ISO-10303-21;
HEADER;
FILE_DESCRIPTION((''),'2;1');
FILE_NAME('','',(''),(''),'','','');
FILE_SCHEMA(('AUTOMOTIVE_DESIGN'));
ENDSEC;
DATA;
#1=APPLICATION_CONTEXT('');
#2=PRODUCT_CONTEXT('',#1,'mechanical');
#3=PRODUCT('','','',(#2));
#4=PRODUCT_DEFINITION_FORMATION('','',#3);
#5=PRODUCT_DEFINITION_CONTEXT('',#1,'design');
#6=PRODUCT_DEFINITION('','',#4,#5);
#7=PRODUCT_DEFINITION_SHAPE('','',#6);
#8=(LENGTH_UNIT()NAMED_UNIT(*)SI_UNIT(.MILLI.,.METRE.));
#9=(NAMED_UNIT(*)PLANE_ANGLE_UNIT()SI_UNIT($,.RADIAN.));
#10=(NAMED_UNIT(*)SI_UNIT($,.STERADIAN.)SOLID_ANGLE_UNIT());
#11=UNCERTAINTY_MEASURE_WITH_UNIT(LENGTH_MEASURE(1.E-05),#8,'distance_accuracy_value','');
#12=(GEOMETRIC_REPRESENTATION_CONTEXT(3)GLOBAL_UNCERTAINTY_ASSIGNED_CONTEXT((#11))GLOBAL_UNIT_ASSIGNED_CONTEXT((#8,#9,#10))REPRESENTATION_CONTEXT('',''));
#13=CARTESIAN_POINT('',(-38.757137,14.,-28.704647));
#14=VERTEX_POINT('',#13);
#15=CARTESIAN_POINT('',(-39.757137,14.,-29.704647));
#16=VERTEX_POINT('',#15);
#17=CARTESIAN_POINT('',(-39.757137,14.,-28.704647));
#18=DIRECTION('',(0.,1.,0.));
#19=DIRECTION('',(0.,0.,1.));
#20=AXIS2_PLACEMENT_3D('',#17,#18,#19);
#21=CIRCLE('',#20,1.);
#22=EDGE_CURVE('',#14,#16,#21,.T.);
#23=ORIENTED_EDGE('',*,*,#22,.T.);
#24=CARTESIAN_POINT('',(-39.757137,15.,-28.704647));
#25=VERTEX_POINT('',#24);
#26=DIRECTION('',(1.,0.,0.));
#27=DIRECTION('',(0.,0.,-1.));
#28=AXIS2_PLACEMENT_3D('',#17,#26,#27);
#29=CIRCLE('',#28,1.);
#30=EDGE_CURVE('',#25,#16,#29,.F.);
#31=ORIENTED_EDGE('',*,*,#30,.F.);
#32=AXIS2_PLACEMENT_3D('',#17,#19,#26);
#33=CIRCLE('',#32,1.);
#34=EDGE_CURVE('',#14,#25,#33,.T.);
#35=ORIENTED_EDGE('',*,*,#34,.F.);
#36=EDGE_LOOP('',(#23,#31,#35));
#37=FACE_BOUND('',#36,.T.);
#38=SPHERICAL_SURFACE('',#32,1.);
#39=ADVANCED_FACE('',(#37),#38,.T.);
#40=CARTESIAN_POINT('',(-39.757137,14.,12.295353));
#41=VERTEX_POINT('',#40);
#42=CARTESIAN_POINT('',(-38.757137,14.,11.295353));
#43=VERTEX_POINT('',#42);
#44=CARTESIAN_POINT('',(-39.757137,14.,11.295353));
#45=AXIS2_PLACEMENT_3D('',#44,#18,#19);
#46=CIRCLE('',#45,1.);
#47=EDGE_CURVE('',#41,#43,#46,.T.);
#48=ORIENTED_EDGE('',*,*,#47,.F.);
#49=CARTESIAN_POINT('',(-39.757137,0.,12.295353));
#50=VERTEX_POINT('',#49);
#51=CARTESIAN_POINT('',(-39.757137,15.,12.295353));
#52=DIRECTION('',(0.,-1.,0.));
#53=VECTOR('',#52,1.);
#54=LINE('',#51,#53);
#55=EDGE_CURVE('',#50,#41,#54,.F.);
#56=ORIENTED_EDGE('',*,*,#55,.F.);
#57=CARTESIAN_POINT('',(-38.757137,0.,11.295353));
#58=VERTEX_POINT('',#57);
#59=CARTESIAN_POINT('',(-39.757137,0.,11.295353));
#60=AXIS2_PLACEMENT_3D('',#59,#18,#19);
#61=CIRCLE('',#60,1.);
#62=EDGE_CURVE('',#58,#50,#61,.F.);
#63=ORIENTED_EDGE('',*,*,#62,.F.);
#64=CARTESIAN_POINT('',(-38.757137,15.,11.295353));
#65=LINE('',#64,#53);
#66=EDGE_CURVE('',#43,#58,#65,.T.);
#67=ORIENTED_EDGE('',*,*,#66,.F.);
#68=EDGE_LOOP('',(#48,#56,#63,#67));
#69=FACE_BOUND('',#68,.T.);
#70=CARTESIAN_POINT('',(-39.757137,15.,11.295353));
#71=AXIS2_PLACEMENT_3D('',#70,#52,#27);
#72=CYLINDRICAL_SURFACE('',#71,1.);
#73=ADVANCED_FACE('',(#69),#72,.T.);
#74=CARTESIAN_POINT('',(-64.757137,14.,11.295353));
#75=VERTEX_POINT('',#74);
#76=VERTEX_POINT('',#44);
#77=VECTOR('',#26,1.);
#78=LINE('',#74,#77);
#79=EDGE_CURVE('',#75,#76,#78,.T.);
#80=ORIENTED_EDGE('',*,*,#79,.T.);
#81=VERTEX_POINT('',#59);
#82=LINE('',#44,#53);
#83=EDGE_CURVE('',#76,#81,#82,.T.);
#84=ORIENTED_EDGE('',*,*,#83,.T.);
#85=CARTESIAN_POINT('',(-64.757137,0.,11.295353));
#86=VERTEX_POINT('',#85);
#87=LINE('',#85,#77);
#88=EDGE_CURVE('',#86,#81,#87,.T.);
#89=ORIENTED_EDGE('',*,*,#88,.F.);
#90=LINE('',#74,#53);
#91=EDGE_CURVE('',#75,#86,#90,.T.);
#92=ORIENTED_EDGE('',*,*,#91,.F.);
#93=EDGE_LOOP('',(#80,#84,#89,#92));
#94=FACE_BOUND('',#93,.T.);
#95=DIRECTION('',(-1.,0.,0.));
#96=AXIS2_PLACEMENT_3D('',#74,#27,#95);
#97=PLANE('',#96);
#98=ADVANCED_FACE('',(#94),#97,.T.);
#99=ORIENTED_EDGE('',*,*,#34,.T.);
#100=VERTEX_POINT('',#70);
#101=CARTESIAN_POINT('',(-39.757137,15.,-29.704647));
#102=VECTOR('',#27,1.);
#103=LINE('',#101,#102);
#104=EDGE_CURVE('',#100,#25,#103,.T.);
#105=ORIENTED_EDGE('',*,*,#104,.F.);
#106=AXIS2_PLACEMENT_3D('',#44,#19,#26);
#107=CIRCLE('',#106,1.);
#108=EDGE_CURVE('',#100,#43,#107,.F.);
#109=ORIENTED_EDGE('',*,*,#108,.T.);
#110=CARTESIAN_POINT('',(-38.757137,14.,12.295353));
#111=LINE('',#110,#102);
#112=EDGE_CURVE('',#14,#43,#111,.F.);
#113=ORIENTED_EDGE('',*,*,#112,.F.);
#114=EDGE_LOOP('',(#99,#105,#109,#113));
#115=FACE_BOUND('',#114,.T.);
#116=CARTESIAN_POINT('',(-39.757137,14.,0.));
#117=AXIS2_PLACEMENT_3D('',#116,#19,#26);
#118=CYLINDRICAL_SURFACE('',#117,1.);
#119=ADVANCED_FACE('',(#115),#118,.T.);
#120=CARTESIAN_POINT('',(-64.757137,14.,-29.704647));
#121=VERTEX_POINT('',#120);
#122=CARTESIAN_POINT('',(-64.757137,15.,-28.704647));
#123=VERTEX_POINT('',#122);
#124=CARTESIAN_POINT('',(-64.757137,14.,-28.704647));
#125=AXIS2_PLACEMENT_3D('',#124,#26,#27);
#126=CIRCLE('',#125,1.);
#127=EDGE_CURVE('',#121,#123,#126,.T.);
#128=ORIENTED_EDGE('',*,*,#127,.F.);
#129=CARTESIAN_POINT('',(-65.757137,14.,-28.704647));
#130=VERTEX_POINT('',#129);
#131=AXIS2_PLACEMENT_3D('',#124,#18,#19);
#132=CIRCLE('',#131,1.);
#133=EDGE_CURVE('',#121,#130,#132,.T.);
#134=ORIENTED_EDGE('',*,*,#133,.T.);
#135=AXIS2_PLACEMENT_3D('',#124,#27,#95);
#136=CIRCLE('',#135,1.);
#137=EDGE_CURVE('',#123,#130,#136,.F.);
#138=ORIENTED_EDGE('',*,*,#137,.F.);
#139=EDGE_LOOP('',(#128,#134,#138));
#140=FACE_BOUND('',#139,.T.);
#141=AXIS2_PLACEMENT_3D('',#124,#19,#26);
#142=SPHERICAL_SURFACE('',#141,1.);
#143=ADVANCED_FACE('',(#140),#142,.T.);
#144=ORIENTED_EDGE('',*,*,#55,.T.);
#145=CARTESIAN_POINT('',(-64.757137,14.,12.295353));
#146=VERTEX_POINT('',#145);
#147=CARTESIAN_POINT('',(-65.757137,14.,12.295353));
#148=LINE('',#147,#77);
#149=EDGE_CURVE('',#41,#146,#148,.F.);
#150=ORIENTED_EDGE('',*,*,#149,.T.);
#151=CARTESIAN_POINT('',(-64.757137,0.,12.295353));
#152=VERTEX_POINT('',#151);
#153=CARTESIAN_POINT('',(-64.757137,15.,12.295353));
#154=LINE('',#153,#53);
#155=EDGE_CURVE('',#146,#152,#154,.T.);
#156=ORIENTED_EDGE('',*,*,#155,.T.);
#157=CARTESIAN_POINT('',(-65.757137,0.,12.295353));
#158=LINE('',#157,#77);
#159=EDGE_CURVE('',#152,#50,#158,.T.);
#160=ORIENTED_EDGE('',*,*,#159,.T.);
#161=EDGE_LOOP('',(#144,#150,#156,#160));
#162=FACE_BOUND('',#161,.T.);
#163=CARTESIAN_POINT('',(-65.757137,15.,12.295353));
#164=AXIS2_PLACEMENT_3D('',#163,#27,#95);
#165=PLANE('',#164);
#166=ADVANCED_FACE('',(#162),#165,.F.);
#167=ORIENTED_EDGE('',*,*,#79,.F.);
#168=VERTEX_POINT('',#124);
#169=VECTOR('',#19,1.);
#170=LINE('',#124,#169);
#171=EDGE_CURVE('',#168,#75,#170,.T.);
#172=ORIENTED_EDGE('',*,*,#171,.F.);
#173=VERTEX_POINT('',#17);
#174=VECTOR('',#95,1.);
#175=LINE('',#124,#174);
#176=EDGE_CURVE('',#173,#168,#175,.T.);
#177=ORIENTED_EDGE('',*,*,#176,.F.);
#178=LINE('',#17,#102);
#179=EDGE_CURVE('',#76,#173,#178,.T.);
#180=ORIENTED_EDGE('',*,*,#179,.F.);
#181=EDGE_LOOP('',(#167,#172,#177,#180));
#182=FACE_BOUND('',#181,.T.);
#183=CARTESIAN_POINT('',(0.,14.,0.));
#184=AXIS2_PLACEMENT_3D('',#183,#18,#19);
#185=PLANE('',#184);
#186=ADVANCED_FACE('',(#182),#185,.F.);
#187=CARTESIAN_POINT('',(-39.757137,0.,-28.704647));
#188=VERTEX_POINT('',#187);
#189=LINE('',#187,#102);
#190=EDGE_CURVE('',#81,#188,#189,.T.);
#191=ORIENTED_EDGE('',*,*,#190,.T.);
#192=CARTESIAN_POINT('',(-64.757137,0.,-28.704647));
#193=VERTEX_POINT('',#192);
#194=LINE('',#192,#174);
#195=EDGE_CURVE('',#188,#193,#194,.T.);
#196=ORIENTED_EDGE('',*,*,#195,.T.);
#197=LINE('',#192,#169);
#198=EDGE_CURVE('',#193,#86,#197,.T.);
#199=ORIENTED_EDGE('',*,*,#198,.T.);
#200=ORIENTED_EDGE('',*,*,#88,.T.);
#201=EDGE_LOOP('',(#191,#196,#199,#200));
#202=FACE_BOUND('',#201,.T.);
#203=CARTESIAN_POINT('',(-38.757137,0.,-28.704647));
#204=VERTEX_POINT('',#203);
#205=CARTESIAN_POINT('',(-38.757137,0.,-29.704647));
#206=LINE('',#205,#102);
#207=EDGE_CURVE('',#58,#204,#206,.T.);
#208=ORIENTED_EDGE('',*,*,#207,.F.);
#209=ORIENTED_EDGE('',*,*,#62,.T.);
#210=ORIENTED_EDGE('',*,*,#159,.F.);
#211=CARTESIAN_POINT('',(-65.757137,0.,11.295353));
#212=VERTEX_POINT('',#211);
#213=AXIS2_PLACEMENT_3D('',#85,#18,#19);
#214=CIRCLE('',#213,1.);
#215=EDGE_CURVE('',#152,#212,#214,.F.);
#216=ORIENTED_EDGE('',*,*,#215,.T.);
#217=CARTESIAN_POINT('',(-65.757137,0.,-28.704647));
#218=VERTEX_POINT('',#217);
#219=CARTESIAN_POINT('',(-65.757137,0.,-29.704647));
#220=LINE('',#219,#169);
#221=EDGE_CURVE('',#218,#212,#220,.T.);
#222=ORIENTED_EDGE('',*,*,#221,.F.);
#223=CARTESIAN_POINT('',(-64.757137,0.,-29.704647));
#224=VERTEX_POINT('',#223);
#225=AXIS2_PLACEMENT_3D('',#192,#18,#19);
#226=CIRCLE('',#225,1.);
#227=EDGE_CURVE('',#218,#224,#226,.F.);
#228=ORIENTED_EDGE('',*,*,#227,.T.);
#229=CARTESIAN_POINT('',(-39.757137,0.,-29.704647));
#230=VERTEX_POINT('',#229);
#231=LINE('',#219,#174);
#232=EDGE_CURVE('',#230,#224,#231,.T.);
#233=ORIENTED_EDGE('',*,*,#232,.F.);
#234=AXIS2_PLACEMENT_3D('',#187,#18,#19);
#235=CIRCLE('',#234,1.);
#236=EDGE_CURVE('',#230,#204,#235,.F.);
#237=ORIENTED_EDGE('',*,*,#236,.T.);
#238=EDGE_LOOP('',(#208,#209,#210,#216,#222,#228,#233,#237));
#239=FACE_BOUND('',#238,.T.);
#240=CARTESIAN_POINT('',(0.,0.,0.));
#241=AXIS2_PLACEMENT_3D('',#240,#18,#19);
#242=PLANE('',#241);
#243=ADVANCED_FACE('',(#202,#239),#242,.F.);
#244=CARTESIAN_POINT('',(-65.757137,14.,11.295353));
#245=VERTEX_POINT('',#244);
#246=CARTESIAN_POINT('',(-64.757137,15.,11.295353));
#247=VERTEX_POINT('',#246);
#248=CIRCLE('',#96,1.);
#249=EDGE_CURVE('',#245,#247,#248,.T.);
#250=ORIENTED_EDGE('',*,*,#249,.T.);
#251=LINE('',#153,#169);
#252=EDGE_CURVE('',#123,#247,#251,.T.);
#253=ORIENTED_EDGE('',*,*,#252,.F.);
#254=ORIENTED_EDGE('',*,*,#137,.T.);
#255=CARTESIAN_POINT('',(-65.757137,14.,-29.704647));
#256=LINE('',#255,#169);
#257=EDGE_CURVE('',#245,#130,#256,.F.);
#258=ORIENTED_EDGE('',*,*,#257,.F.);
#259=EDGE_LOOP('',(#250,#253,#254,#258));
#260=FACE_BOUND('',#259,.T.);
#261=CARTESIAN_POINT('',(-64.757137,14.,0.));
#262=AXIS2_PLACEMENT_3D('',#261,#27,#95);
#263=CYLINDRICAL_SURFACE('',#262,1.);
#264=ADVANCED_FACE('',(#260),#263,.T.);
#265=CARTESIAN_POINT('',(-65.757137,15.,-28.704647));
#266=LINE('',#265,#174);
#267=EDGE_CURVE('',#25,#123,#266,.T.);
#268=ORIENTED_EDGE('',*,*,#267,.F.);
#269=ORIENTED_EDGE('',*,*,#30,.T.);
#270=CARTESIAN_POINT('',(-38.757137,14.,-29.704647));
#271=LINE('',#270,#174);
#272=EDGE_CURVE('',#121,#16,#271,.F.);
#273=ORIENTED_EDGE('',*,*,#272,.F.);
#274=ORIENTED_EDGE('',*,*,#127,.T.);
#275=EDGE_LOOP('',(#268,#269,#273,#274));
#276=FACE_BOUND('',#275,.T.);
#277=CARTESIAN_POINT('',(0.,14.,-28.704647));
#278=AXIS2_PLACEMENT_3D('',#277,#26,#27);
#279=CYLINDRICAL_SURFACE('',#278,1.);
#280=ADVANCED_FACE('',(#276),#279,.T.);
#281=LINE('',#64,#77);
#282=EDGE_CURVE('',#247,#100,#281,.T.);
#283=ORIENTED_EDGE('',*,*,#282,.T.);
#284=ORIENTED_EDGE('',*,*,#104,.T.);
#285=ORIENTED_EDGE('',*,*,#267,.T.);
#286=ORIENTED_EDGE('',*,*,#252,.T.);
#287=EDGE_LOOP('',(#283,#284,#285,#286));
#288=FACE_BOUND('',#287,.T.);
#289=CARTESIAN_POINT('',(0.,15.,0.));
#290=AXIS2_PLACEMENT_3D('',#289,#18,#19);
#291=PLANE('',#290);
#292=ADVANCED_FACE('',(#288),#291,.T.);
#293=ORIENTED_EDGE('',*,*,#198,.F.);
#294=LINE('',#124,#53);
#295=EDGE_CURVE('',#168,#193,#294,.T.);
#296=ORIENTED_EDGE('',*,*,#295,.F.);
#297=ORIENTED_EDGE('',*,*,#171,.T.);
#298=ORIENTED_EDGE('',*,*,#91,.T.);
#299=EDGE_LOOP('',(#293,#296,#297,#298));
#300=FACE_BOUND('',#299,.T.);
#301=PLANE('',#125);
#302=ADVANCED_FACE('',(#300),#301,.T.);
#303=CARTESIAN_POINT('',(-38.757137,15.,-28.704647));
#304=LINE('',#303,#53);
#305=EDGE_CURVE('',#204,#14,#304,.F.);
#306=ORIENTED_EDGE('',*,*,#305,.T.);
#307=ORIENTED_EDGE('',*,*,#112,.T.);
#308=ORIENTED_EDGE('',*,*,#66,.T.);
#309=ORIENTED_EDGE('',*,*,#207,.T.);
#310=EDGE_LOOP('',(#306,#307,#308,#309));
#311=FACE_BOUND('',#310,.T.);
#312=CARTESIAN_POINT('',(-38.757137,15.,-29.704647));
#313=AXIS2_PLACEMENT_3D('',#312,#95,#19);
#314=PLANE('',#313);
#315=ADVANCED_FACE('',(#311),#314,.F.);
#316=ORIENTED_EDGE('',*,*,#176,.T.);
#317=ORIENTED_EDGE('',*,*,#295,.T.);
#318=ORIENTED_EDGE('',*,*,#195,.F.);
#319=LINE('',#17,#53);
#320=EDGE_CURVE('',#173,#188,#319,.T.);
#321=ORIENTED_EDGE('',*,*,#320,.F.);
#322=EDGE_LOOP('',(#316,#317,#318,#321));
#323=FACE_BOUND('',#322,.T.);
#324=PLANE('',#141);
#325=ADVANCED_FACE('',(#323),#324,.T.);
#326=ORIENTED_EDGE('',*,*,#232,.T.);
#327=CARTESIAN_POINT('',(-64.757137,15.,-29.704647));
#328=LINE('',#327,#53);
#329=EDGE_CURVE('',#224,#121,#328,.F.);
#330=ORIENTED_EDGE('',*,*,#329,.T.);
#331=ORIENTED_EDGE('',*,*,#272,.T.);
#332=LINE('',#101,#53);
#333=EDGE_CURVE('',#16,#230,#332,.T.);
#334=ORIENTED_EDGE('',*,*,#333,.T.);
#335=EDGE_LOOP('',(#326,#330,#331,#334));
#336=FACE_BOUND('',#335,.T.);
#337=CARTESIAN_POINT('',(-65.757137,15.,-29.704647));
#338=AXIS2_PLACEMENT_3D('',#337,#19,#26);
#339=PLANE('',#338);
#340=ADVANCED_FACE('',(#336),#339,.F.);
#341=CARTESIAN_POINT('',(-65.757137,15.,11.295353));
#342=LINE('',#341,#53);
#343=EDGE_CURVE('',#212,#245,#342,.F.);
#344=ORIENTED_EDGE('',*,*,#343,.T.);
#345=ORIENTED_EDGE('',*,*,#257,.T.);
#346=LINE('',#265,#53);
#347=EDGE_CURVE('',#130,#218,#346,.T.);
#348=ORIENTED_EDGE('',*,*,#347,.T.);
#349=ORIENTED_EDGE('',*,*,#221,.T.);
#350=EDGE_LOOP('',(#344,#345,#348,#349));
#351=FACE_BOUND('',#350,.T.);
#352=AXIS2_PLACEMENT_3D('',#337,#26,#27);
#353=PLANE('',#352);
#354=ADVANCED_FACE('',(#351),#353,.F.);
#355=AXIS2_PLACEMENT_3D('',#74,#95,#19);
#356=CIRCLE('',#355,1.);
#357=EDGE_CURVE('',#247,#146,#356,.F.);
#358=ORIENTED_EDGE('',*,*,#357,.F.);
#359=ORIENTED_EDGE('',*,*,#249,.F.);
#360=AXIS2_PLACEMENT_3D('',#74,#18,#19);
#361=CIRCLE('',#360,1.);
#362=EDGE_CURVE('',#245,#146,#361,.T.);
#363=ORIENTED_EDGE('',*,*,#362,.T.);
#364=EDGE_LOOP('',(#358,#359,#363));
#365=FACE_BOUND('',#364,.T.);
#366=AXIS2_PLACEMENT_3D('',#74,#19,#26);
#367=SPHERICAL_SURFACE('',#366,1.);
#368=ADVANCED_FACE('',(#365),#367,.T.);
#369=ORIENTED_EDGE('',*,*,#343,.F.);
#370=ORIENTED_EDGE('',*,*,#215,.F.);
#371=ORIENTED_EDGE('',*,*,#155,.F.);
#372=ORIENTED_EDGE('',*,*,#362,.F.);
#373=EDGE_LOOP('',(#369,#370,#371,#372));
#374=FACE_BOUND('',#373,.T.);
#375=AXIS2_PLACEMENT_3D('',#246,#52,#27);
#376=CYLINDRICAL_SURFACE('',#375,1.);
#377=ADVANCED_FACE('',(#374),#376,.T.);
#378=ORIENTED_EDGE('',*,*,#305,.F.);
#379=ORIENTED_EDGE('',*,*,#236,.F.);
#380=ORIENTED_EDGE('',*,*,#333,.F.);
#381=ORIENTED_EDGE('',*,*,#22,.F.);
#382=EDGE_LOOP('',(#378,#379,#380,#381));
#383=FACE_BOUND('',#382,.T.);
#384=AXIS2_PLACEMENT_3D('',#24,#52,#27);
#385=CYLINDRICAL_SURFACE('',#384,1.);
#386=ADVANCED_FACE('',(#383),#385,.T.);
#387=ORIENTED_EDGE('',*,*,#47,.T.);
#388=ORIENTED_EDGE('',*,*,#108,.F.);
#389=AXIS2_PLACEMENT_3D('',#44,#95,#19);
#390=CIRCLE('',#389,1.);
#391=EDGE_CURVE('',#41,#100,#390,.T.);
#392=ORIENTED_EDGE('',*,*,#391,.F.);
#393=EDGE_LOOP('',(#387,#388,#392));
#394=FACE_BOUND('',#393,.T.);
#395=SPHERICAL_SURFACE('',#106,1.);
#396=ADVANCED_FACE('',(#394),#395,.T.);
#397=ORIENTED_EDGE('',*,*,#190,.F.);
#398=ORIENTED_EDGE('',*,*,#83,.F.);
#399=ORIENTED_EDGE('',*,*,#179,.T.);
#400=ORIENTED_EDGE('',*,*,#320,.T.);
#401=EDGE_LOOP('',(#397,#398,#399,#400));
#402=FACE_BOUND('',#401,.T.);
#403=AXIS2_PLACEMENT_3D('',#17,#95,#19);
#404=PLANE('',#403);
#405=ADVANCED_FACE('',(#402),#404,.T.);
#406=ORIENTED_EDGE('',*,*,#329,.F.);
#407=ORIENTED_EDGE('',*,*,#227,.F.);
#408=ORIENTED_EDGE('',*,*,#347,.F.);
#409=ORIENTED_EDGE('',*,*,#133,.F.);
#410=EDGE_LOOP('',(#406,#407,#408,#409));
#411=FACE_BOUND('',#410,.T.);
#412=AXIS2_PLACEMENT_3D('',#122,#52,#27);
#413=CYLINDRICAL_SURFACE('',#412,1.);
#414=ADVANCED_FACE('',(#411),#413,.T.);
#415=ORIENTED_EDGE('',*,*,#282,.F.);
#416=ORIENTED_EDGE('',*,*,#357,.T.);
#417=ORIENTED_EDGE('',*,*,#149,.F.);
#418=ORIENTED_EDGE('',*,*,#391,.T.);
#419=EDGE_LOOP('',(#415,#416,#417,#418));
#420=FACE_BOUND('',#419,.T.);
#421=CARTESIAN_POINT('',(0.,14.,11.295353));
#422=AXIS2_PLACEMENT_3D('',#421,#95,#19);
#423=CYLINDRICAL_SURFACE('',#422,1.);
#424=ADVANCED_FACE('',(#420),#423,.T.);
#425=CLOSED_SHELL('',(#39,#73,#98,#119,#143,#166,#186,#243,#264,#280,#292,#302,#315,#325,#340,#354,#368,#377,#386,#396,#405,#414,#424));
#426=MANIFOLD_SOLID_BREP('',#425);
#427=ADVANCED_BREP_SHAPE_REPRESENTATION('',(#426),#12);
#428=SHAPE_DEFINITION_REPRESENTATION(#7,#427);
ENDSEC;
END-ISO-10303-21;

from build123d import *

# Parameters (mm, degrees)
SKETCH_1_W          = 27
SKETCH_1_H          = 42
EXTRUDE_1_DEPTH     = 15
SKETCH_4_W          = 25
SKETCH_4_H          = 40
CUT_EXTRUDE_1_DEPTH = 14
FILLET_1_R          = 1
FILLET_3_R          = 1


with BuildPart() as part:
    # ｽｹｯﾁ1 → ﾎﾞｽ - 押し出し1 (new body)
    with BuildSketch(Plane(origin=(0, 0, 0), x_dir=(1, 0, 0), z_dir=(0, 1, 0))):
        with Locations((-52.257137385, 8.704647457)):
            Rectangle(SKETCH_1_W, SKETCH_1_H)
    extrude(amount=EXTRUDE_1_DEPTH)

    # ｽｹｯﾁ4 → ｶｯﾄ - 押し出し1 (cut)
    with BuildSketch(Plane(origin=(0, 0, 0), x_dir=(1, 0, 0), z_dir=(0, 1, 0))):
        with Locations((-52.257137385, 8.704647457)):
            Rectangle(SKETCH_4_W, SKETCH_4_H)
    extrude(amount=CUT_EXTRUDE_1_DEPTH, mode=Mode.SUBTRACT)

    # ﾌｨﾚｯﾄ1
    fillet_1_edges = [part.edges().sort_by_distance(p)[0] for p in [
        (-38.757137385, 15, -8.704647457),
        (-52.257137385, 15, -29.704647457),
        (-65.757137385, 15, -8.704647457),
        (-52.257137385, 15, 12.295352543),
    ]]
    fillet(fillet_1_edges, radius=FILLET_1_R)

    # ﾌｨﾚｯﾄ3
    # the kernel refuses this fillet: 1 mm, written as the material it takes off along each edge
    with BuildSketch(Plane(origin=(-39.757137385, 14, 11.295352543), x_dir=(0, 0, 1), z_dir=(1, 0, 0))) as fillet_3_piece_1_section:
        Polygon((0, 0), (FILLET_3_R, 0), (FILLET_3_R, -FILLET_3_R), (0, -FILLET_3_R), align=None)
    fillet_3_piece_1 = extrude(amount=FILLET_3_R, mode=Mode.PRIVATE)
    fillet_3_piece_1 = fillet_3_piece_1 - Plane(origin=(-39.757137385, 14, 11.295352543), x_dir=(0, -0.7071067811865475, -0.7071067811865475), z_dir=(1, 0, 0)) * Sphere(FILLET_3_R, mode=Mode.PRIVATE)
    add(fillet_3_piece_1, mode=Mode.SUBTRACT)
    with BuildSketch(Plane(origin=(-64.757137385, 14, 11.295352543), x_dir=(0, 0, 1), z_dir=(-1, 0, 0))) as fillet_3_piece_2_section:
        Polygon((0, 0), (FILLET_3_R, 0), (FILLET_3_R, FILLET_3_R), (0, FILLET_3_R), align=None)
    fillet_3_piece_2 = extrude(amount=FILLET_3_R, mode=Mode.PRIVATE)
    fillet_3_piece_2 = fillet_3_piece_2 - Plane(origin=(-64.757137385, 14, 11.295352543), x_dir=(0, -0.7071067811865475, -0.7071067811865475), z_dir=(-1, 0, 0)) * Sphere(FILLET_3_R, mode=Mode.PRIVATE)
    add(fillet_3_piece_2, mode=Mode.SUBTRACT)
    with BuildSketch(Plane(origin=(-39.757137385, 14, -28.704647457), x_dir=(1, 0, 0), z_dir=(0, 0, -1))) as fillet_3_piece_3_section:
        Polygon((0, 0), (FILLET_3_R, 0), (FILLET_3_R, -FILLET_3_R), (0, -FILLET_3_R), align=None)
    fillet_3_piece_3 = extrude(amount=FILLET_3_R, mode=Mode.PRIVATE)
    fillet_3_piece_3 = fillet_3_piece_3 - Plane(origin=(-39.757137385, 14, -28.704647457), x_dir=(-0.7071067811865475, -0.7071067811865475, 0), z_dir=(0, 0, -1)) * Sphere(FILLET_3_R, mode=Mode.PRIVATE)
    add(fillet_3_piece_3, mode=Mode.SUBTRACT)
    with BuildSketch(Plane(origin=(-64.757137385, 14, -28.704647457), x_dir=(-1, 0, 0), z_dir=(0, 0, -1))) as fillet_3_piece_4_section:
        Polygon((0, 0), (FILLET_3_R, 0), (FILLET_3_R, FILLET_3_R), (0, FILLET_3_R), align=None)
    fillet_3_piece_4 = extrude(amount=FILLET_3_R, mode=Mode.PRIVATE)
    fillet_3_piece_4 = fillet_3_piece_4 - Plane(origin=(-64.757137385, 14, -28.704647457), x_dir=(0.7071067811865475, -0.7071067811865475, 0), z_dir=(0, 0, -1)) * Sphere(FILLET_3_R, mode=Mode.PRIVATE)
    add(fillet_3_piece_4, mode=Mode.SUBTRACT)
    with BuildSketch(Plane(origin=(-65.757137385, -2.5, -29.704647457), x_dir=(1, 0, 0), z_dir=(0, 1, 0)), Plane(origin=(-65.757137385, -2.5, 12.295352543), x_dir=(0, 0, -1), z_dir=(0, 1, 0))) as fillet_3_piece_5:
        with BuildLine():
            CenterArc((FILLET_3_R, -FILLET_3_R), FILLET_3_R, 90, 90)
            Line((0, -FILLET_3_R), (0, 0))
            Line((0, 0), (FILLET_3_R, 0))
        make_face()
    extrude(amount=16.5, mode=Mode.SUBTRACT)
    with BuildSketch(Plane(origin=(-38.757137385, -2.5, -29.704647457), x_dir=(-1, 0, 0), z_dir=(0, 1, 0)), Plane(origin=(-38.757137385, -2.5, 12.295352543), x_dir=(0, 0, -1), z_dir=(0, 1, 0))) as fillet_3_piece_6:
        with BuildLine():
            CenterArc((FILLET_3_R, FILLET_3_R), FILLET_3_R, 180, 90)
            Line((0, FILLET_3_R), (0, 0))
            Line((0, 0), (FILLET_3_R, 0))
        make_face()
    extrude(amount=16.5, mode=Mode.SUBTRACT)


solid = part.part
